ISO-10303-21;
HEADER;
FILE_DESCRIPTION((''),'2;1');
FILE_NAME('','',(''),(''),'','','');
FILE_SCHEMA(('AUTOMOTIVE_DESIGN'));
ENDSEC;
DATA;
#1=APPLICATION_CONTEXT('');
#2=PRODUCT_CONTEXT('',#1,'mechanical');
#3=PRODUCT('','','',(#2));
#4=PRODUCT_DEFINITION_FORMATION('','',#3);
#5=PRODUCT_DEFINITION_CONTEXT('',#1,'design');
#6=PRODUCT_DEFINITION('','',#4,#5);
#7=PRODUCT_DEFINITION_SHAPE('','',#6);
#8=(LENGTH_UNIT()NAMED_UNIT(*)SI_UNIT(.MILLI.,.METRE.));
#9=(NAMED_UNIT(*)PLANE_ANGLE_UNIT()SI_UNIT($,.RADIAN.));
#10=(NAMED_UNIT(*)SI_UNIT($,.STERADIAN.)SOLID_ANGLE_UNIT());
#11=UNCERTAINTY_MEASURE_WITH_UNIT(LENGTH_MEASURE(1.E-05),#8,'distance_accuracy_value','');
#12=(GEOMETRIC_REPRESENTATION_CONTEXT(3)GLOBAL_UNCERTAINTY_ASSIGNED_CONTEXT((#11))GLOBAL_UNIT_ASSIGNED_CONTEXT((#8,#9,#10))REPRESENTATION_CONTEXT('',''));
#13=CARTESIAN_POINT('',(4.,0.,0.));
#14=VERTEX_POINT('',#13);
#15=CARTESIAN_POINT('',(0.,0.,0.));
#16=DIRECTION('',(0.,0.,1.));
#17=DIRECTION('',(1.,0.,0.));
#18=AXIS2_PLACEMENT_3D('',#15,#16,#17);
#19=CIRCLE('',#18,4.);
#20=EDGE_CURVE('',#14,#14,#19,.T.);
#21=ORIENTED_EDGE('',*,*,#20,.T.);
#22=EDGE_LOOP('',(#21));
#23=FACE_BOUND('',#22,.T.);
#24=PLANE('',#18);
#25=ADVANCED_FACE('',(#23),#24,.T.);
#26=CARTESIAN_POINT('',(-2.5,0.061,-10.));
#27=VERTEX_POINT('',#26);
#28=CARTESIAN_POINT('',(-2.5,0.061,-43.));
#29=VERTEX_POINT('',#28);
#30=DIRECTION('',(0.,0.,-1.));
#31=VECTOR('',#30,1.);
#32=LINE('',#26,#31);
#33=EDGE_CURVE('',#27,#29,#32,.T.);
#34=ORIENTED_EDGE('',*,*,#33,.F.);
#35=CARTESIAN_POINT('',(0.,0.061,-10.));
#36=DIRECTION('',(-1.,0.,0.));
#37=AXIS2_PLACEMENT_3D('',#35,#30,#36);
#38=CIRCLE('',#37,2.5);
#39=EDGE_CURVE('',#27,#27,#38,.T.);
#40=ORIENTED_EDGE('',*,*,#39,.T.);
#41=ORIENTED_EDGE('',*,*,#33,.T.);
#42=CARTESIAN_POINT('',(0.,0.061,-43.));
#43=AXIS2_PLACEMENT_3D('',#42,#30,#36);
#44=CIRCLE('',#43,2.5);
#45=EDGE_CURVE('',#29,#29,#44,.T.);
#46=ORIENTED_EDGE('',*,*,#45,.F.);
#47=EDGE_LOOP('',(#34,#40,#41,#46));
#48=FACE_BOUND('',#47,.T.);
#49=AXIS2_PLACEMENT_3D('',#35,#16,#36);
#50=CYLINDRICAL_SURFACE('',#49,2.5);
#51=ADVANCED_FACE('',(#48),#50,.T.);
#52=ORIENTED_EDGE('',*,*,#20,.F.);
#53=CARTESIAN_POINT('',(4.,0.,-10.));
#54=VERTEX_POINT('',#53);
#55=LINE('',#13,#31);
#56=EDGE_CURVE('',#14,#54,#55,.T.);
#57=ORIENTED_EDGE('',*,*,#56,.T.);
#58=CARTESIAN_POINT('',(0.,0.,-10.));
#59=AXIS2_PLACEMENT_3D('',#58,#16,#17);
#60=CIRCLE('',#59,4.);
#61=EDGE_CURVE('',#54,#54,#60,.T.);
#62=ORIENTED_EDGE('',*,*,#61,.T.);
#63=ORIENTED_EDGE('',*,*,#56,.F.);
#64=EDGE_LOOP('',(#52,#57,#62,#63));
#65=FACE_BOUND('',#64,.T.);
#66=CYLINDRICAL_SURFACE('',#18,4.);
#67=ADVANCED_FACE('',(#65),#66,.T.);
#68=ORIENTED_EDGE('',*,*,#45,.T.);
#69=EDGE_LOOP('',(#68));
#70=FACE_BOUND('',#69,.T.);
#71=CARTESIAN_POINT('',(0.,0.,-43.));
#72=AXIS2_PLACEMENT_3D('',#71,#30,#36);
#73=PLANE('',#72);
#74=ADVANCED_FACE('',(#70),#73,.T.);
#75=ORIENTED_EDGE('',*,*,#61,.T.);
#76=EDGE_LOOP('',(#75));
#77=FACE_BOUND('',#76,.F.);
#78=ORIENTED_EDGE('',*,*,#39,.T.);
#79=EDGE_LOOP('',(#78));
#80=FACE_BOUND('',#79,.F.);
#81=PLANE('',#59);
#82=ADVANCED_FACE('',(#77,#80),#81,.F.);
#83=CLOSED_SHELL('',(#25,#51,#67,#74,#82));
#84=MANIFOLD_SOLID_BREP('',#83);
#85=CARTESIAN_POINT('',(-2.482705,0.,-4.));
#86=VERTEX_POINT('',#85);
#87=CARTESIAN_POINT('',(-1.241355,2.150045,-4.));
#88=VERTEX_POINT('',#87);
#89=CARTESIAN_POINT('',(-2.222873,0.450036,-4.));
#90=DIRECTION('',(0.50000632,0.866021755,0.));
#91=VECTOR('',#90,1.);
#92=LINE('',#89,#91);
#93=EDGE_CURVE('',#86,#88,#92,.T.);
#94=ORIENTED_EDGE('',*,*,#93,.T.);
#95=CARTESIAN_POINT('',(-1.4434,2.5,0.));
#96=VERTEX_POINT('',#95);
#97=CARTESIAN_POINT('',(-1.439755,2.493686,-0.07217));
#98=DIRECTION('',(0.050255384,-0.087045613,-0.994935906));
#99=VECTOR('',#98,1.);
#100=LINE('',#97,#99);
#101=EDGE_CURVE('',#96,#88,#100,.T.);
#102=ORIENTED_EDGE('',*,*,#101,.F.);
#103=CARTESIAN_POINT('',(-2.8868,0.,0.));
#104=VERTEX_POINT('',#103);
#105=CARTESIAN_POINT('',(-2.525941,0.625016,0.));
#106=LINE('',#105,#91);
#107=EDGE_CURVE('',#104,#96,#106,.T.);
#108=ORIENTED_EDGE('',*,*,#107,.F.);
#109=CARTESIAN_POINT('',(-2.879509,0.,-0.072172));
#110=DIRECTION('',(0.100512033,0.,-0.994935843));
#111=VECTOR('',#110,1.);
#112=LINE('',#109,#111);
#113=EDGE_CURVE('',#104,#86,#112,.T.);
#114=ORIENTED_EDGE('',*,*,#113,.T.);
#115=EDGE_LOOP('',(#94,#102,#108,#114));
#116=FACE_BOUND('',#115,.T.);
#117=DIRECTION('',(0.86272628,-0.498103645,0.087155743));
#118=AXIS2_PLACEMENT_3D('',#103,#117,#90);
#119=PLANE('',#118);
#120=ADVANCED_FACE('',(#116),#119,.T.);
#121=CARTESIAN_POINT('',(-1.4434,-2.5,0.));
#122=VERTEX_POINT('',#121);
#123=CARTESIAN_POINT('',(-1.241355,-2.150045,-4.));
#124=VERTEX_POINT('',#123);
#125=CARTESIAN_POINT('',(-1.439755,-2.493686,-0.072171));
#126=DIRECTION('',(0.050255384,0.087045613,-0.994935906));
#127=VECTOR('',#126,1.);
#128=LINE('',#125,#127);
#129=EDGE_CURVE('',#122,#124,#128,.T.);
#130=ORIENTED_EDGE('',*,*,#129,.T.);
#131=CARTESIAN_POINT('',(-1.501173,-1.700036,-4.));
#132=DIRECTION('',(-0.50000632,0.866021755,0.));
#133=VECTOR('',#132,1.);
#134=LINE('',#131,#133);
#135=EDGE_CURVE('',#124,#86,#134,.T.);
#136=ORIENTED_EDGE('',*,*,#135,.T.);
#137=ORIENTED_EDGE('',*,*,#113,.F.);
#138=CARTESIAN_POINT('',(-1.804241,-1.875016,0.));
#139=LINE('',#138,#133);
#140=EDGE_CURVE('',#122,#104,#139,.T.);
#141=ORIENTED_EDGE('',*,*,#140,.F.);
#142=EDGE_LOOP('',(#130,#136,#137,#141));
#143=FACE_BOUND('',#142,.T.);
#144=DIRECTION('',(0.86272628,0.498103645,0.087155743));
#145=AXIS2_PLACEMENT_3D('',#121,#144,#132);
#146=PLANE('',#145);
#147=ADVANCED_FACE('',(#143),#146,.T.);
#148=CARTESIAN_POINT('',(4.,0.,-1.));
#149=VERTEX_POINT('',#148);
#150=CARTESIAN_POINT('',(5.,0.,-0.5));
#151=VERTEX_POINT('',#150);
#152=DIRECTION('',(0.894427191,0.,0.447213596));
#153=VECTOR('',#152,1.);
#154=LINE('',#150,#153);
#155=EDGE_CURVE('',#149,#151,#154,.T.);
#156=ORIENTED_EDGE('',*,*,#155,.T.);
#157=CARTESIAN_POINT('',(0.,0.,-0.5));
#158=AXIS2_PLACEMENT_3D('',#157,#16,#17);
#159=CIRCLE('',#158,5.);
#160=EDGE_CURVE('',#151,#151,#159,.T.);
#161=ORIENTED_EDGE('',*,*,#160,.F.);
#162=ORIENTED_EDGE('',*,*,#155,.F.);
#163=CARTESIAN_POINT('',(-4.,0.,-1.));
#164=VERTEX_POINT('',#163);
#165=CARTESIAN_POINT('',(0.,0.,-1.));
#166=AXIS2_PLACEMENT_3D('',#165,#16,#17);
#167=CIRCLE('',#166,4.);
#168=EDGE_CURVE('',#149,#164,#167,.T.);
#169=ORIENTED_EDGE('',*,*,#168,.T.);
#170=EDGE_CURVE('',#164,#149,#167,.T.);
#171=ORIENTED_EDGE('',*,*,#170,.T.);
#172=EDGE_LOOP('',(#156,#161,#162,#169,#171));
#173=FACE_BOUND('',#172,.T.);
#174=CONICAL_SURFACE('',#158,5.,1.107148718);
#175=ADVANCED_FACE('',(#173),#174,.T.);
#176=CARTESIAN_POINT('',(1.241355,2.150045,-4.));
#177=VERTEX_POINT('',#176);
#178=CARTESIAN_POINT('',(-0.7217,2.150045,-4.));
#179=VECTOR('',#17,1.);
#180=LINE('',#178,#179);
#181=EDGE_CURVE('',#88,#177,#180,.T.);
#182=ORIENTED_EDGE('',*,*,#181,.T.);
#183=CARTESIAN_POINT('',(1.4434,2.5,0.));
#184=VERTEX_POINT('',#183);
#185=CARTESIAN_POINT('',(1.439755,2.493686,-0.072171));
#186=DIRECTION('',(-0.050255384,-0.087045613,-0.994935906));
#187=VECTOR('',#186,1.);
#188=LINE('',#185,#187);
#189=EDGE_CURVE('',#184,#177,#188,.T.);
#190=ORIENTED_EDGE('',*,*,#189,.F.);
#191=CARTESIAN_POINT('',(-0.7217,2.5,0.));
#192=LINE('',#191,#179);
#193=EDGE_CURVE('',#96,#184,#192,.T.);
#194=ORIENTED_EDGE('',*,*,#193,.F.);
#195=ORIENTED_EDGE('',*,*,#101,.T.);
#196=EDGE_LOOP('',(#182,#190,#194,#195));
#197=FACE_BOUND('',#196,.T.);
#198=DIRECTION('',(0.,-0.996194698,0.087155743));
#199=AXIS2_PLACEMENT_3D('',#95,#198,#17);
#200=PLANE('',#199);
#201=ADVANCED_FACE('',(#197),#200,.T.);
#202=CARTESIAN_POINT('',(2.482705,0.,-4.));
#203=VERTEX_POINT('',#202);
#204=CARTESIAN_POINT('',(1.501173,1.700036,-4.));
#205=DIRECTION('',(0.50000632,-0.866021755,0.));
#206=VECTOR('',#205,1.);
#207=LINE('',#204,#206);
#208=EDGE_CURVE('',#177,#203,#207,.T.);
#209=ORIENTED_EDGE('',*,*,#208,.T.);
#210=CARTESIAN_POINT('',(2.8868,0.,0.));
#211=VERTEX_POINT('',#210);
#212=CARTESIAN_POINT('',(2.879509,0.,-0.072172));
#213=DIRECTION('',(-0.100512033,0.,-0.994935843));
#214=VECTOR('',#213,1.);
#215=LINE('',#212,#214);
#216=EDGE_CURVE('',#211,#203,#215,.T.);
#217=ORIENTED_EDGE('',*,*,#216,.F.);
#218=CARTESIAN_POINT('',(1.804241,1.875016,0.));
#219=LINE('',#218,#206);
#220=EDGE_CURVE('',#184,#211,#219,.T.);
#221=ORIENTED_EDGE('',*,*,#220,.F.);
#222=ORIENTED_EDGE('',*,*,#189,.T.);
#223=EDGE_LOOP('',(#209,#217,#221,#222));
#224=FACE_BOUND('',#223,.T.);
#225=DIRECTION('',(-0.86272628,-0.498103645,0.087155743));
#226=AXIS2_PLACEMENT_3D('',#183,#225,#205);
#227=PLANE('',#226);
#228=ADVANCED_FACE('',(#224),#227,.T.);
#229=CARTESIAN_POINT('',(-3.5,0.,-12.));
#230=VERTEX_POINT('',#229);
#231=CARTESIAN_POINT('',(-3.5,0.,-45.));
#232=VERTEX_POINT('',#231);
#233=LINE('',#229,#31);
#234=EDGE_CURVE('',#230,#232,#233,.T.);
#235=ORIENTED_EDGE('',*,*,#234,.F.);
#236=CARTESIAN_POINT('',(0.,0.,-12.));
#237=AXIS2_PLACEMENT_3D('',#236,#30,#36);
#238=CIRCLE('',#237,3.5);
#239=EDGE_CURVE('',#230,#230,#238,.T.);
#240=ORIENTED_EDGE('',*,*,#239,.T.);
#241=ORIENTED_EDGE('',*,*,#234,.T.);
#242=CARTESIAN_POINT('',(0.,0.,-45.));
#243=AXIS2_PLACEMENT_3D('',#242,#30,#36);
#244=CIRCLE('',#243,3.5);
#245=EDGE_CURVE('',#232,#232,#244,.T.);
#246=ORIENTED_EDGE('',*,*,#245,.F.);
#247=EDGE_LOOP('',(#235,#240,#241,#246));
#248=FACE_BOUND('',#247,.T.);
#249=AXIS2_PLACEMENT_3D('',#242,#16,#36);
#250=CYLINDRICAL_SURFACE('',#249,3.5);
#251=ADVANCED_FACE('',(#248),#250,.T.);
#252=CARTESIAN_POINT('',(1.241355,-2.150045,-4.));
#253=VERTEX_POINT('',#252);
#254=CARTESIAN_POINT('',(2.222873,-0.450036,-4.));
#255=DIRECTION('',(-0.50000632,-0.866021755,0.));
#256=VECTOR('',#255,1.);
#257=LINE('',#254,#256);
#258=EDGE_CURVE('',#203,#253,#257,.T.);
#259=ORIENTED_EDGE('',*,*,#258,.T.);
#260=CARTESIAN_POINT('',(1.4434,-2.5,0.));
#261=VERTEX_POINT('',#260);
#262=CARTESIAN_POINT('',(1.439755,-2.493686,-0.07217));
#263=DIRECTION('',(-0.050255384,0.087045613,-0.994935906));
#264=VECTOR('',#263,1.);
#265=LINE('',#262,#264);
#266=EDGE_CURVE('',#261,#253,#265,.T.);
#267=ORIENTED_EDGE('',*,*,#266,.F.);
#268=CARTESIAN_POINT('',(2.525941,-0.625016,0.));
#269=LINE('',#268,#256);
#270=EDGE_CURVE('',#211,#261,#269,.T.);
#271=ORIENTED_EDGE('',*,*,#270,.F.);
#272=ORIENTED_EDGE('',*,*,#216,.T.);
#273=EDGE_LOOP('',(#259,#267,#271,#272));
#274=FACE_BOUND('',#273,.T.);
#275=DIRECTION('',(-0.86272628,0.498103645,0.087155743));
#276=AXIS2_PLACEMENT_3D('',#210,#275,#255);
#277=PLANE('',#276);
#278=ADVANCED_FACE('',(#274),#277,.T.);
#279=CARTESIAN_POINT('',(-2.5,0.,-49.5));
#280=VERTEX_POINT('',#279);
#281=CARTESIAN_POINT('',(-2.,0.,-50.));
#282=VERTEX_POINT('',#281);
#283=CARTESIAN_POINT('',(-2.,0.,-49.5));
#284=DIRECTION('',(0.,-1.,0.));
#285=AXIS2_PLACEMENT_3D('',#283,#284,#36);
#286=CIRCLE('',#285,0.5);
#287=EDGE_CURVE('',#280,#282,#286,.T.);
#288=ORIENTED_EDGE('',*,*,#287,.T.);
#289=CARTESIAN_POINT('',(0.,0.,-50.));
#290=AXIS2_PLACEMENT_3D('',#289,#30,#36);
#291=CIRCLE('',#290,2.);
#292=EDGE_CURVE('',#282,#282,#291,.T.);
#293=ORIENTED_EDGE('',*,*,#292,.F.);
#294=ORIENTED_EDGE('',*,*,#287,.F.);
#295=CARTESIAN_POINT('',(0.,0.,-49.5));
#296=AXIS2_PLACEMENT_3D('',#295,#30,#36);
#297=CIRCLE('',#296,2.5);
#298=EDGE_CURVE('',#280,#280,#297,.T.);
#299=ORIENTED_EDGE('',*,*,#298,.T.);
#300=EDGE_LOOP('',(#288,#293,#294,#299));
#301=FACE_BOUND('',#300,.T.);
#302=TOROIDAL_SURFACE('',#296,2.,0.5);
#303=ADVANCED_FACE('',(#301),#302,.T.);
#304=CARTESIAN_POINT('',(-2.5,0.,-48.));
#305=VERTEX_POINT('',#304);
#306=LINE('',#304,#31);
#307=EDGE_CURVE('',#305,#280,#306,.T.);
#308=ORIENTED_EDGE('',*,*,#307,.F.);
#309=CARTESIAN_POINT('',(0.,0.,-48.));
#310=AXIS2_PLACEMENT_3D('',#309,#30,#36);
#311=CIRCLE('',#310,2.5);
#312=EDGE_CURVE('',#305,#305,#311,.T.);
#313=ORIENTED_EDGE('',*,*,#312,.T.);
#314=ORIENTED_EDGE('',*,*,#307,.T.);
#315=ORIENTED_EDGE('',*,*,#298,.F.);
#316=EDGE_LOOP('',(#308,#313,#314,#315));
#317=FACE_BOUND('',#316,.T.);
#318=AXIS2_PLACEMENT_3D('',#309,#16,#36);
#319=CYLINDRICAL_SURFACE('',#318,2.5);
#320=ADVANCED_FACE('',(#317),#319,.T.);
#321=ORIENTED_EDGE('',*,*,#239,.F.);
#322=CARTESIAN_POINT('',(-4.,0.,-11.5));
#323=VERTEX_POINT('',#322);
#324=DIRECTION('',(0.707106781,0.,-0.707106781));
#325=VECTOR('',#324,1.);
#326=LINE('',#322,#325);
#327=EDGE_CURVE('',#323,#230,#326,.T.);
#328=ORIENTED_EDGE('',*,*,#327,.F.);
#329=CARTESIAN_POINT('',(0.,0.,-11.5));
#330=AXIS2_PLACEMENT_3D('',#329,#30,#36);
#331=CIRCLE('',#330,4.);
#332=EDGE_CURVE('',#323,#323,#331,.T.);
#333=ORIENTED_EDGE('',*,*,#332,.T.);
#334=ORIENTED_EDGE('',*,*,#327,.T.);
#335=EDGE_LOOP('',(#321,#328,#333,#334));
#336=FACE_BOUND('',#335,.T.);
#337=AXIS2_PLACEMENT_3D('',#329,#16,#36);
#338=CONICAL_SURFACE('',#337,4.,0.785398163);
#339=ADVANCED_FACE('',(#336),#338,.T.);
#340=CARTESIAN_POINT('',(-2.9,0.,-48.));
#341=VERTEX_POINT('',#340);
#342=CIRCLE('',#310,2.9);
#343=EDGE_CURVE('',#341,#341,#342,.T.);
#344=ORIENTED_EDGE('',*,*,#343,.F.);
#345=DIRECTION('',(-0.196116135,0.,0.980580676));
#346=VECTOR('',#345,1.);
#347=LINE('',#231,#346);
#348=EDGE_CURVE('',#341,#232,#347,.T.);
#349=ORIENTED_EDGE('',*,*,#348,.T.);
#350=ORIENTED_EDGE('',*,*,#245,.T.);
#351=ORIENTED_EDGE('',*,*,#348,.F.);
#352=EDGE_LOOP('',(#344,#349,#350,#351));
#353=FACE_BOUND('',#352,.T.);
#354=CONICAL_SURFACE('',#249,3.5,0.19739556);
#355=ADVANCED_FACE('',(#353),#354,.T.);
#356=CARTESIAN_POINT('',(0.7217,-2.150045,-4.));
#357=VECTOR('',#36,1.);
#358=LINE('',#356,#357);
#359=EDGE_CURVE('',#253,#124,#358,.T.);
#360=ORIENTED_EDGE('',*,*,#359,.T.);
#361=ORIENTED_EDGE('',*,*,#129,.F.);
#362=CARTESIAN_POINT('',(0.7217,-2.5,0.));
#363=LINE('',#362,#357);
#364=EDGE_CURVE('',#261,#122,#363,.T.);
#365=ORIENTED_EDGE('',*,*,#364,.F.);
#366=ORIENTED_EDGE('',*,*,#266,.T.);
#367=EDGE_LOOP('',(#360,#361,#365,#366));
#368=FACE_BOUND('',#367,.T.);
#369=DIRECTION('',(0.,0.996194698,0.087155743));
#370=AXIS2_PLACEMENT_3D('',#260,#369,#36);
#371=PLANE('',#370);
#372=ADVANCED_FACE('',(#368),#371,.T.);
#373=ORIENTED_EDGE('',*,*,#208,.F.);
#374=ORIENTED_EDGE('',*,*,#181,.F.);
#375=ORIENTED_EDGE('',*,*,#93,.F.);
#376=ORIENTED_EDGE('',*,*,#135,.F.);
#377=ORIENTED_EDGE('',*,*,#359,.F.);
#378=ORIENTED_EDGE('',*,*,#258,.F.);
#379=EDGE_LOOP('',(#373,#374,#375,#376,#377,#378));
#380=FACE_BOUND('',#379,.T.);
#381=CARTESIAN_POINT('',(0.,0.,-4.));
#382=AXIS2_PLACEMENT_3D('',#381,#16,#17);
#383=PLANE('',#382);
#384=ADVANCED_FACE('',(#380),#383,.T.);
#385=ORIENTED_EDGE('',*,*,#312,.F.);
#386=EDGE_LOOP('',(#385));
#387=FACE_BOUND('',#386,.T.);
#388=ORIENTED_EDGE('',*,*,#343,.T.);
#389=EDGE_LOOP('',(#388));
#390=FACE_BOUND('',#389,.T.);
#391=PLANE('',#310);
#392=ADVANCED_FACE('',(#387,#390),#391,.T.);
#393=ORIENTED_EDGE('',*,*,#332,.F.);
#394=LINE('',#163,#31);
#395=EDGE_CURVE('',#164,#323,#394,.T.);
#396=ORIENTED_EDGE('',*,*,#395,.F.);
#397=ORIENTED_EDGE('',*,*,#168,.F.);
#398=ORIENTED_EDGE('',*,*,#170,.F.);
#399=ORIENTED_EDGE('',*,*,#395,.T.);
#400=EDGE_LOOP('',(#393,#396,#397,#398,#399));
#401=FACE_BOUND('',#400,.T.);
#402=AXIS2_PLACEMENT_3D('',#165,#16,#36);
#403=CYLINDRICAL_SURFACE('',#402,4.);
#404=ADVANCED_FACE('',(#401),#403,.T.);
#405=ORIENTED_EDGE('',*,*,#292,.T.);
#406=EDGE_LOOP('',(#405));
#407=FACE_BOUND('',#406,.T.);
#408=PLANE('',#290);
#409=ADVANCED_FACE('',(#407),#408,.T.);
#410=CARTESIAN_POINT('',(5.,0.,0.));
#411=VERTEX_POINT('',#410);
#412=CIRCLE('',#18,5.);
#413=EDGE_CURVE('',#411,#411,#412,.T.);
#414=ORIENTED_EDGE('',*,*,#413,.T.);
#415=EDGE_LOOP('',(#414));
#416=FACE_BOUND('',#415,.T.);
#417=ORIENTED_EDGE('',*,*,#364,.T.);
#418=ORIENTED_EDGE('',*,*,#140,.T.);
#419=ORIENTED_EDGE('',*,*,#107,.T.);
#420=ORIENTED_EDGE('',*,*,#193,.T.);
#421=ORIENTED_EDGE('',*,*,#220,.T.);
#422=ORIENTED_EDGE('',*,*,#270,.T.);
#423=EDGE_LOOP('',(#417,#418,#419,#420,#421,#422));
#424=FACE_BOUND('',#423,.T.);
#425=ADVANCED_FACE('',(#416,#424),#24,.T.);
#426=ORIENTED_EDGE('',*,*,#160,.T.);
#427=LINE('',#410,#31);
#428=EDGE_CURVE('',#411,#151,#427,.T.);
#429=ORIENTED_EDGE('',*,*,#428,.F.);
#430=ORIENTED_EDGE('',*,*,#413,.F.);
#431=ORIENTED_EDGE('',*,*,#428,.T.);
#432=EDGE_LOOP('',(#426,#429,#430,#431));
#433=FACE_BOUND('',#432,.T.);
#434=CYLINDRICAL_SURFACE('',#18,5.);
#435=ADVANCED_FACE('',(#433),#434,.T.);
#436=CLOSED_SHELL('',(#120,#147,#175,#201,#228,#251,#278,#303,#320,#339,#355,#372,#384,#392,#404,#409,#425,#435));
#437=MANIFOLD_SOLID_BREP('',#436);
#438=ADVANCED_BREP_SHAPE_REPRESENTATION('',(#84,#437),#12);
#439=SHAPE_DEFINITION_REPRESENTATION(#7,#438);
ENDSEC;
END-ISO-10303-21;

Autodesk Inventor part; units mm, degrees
ref_plane "YZ Plane" through (0, 0, 0) normal (1, 0, 0) x (0, 1, 0)
ref_plane "XZ Plane" through (0, 0, 0) normal (0, 1, 0) x (-1, 0, 0)
ref_plane "XY Plane" through (0, 0, 0) normal (0, 0, 1) x (1, 0, 0)
sketch "Sketch1" plane through (0, 0, 0) normal (0, 0, 1) x (1, 0, 0)
  circle A0 centre (0, 0) radius 5
  dimension "d0" = 10
extrude "Extrusion1" add sketch "Sketch1" against normal blind 1
chamfer "Chamfer1" distance 1 distance2 0.5 1 edges at (-5, 0, -1) measured on face at (-0.591, 1.5584, -1)
sketch "Sketch2" plane through (0, 0, -1) normal (0, 0, -1) x (-1, 0, 0)
  circle A0 centre (0, 0) radius 4 projected
extrude "Extrusion2" add sketch "Sketch2" along normal blind 11
chamfer "Chamfer2" distance 0.5 angle 45 1 edges at (4, 0, -12)
sketch "Sketch3" plane through (0, 0, -12) normal (0, 0, -1) x (-1, 0, 0)
  circle A0 centre (0, 0) radius 3.5 projected
extrude "Extrusion3" add sketch "Sketch3" along normal blind 33
sketch "Sketch4" plane through (0, 0, -45) normal (0, 0, -1) x (-1, 0, 0)
  circle A0 centre (0, 0) radius 3.5 projected
extrude "Extrusion4" add sketch "Sketch4" along normal blind 3
chamfer "Chamfer3" distance 0.6 distance2 3 1 edges at (3.5, 0, -48) measured on face at (0.4137, 0.4564, -48)
sketch "Sketch5" plane through (0, 0, -48) normal (0, 0, -1) x (-1, 0, 0)
  circle A0 centre (0, 0) radius 2.9 projected
  circle A1 centre (0, 0) radius 2.5
  dimension "d18" = 0.4
extrude "Extrusion5" add sketch "Sketch5" along normal blind 2 contours A1
fillet "Fillet1" radius 0.5 1 edges at (2.5, 0, -50)
sketch "Sketch6" plane through (0, 0, 0) normal (0, 0, 1) x (1, 0, 0)
  line L0 (1.4434, 2.5) -> (2.8868, 0)
  line L1 (2.8868, 0) -> (1.4434, -2.5)
  line L2 (1.4434, -2.5) -> (-1.4434, -2.5)
  line L3 (-1.4434, -2.5) -> (-2.8868, 0)
  line L4 (-2.8868, 0) -> (-1.4434, 2.5)
  line L5 (-1.4434, 2.5) -> (1.4434, 2.5)
  point P0 (0, 0)
  point P1 (0, 0)
  dimension "d22" = 5
extrude "Extrusion6" cut sketch "Sketch6" against normal blind 4 draft -5
sketch "Sketch7" plane through (0, 0, 0) normal (0, 0, 1) x (1, 0, 0)
  circle A0 centre (0, 0) radius 4 projected
extrude "Extrusion7" add sketch "Sketch7" against normal blind 10 separate body
sketch "Sketch8" plane through (0, 0, -10) normal (0, 0, -1) x (-1, 0, 0)
  circle A0 centre (0, 0.061) radius 2.5
  point P0 (0, 0)
  dimension "d27" = 5
extrude "Extrusion8" add sketch "Sketch8" along normal blind 33 bodies 2
thread "Thread1" size "M7x1" class "6g" standard "ISO Metric profile" full length
equation "\"d25\" = Nestled_Board_Thickness"
equation "\"Nestled_Board_Thickness\" = 10"
properties part number "Confirmat L50 NB T12"
